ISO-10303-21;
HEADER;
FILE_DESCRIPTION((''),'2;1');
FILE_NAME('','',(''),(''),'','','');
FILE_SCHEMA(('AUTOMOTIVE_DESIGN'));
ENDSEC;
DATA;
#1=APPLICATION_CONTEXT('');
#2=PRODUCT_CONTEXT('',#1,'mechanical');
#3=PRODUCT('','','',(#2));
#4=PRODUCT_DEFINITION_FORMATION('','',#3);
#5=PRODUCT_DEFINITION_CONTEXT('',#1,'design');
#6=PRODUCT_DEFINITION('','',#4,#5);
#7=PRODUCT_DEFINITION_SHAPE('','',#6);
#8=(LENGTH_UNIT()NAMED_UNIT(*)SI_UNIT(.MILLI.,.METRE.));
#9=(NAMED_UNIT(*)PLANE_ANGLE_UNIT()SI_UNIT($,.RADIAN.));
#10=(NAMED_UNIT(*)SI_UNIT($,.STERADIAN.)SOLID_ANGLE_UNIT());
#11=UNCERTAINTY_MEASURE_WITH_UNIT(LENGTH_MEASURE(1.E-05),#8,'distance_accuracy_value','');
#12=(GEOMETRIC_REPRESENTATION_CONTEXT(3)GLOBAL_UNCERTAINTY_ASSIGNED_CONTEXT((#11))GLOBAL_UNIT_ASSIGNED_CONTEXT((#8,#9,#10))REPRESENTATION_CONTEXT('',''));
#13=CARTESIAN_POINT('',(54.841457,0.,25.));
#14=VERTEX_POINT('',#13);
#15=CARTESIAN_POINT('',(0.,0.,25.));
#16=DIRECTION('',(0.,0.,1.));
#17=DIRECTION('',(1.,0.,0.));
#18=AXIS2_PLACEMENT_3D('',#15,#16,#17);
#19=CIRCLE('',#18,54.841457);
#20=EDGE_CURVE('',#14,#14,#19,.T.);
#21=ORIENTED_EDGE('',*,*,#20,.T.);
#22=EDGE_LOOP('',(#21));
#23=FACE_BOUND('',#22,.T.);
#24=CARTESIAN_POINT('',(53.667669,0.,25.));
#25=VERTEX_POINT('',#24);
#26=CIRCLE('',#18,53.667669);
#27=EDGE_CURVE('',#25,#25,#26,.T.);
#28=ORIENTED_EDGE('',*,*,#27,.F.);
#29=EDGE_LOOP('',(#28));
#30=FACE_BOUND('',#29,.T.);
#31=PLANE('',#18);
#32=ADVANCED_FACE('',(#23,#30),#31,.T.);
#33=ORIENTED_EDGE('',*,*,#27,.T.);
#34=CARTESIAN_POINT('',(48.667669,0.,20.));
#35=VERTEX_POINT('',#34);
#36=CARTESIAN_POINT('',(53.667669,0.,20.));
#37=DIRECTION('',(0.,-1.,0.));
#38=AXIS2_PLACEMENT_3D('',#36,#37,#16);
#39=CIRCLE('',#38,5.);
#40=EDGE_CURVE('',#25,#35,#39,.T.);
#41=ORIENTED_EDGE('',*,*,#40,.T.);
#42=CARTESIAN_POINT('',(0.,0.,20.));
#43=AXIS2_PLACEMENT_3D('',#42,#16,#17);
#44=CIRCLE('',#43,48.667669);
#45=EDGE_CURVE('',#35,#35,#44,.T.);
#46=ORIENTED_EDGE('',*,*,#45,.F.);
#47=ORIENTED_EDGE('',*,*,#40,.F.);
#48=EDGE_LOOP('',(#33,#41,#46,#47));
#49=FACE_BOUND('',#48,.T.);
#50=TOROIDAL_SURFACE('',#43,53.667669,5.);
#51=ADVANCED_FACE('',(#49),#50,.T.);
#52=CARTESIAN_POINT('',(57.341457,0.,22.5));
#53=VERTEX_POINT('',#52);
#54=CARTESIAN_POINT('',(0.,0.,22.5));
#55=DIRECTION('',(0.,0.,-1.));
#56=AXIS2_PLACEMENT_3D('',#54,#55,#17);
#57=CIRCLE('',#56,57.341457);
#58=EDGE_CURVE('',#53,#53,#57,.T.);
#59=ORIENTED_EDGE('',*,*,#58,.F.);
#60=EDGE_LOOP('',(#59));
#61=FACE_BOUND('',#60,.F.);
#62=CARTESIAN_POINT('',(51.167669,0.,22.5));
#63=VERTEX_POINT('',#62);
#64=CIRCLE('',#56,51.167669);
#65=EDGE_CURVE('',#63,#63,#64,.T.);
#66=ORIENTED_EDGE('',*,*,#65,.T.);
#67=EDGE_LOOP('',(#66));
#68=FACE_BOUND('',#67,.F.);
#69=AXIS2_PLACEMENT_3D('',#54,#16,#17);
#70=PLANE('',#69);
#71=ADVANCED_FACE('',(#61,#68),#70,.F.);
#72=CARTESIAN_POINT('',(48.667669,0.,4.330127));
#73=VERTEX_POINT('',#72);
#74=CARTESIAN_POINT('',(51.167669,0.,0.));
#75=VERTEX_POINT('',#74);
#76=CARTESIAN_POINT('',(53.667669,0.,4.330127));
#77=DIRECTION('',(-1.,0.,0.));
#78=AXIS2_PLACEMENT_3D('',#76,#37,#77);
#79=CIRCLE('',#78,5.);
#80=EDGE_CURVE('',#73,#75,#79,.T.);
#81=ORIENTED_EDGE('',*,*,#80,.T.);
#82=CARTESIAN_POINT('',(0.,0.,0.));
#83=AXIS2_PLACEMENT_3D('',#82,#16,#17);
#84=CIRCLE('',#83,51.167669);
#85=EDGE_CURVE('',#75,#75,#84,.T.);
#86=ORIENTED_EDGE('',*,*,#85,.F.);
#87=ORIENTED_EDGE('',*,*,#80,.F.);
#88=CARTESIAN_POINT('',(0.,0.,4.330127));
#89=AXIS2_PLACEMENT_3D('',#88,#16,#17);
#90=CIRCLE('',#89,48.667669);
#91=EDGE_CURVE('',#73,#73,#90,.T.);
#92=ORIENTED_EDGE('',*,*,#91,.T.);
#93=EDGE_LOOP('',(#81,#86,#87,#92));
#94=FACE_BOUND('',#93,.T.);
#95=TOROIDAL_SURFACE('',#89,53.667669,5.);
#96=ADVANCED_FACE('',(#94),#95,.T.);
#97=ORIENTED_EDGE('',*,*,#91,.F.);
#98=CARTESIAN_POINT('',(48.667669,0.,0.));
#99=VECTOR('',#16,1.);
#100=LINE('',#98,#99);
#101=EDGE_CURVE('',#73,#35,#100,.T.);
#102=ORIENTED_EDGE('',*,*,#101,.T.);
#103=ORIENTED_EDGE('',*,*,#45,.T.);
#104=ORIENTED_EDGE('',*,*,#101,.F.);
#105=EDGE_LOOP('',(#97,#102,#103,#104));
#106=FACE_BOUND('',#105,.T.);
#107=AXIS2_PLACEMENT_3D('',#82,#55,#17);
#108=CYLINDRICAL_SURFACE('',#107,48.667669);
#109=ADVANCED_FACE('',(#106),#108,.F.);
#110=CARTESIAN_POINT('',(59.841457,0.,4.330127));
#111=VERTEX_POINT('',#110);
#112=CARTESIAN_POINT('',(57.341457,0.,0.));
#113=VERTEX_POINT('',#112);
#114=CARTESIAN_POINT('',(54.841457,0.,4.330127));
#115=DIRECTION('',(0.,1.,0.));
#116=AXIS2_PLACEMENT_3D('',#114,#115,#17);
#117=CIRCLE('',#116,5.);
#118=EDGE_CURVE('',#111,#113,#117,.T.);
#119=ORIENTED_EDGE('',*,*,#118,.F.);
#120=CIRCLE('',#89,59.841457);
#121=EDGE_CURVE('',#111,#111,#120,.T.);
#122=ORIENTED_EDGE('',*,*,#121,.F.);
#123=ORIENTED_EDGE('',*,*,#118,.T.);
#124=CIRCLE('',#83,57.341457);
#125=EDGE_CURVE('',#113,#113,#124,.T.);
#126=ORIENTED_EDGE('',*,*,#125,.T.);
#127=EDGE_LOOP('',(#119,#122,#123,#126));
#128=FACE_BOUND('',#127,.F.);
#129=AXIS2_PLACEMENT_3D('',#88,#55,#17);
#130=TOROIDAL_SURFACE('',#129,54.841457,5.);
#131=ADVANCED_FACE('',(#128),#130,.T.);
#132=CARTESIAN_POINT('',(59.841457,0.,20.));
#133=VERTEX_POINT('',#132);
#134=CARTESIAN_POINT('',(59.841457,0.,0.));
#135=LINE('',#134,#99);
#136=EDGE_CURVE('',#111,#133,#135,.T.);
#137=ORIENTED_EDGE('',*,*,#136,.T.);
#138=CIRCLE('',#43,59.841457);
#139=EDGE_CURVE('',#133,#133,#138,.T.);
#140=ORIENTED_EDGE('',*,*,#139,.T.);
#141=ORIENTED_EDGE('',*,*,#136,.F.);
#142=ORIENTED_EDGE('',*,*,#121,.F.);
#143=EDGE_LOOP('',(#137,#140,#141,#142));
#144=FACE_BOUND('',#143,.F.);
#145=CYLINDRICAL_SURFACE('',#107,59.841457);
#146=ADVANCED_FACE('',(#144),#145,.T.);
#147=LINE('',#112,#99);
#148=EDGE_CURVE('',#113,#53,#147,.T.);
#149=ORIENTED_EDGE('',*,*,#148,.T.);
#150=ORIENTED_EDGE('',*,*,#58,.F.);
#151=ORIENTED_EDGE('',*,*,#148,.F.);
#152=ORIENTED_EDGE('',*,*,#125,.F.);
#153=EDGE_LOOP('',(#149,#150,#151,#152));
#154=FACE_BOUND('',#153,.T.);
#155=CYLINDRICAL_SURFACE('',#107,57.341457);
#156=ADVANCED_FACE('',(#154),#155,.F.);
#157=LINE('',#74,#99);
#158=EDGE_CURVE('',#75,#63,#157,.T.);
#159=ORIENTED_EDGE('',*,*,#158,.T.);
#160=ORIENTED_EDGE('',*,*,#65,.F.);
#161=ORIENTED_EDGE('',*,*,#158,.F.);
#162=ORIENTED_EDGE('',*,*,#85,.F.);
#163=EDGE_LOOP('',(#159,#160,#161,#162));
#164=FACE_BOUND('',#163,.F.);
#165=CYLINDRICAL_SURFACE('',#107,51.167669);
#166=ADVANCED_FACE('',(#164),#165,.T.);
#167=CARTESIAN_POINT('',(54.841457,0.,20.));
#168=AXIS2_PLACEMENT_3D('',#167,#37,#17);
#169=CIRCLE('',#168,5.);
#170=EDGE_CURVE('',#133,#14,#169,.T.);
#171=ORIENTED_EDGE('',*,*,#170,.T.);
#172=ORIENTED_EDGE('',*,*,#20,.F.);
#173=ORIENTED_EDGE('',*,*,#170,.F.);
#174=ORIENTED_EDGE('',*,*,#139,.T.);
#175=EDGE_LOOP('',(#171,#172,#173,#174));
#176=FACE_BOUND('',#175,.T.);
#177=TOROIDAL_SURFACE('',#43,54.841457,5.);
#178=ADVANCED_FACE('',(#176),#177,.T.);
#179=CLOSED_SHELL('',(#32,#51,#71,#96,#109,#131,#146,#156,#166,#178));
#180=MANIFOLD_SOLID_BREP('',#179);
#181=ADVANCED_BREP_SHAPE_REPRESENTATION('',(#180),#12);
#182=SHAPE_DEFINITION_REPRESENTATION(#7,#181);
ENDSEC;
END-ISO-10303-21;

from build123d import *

# Parameters (mm, degrees)
F0_R     = 59.8414566133
F0_R_2   = 48.6676693488
F3_DEPTH = 25
F7_T     = -2.5


# Not quite as in the source:
# - a fillet or chamfer that OpenCascade refuses, or shapes differently, is made with other operations: its cross-section is extruded or revolved along the edge and cut away or added
# - the program builds the solid bodies; features that only make, move or delete a surface that nothing else refers to are left out


with BuildPart() as f3:
    # F0 (on Top) → F3 (new body)
    with BuildSketch(Plane.XY):
        Circle(F0_R)
        Circle(F0_R_2, mode=Mode.SUBTRACT)
    extrude(amount=F3_DEPTH)

    # F7
    f7_openings = [f3.faces().sort_by_distance(p)[0] for p in [
        (-58.148885, 0, 0),
    ]]
    offset(amount=F7_T, openings=f7_openings)

    # F8: fillet of radius 5 on 3 edges, made by hand

    # F8_s1 → F8_t2 (revolve, cut)
    with BuildSketch(Plane.XZ):
        with BuildLine():
            ThreePointArc((59.8414566133, 4.3301270189), (59.1715836322, 1.8301270189), (57.3414566133, 0))
            Line((57.3414566133, 0), (59.8414566133, 0))
            Line((59.8414566133, 0), (59.8414566133, 4.3301270189))
        make_face()
    revolve(axis=Axis((0, 0, 0), (0, 0, 1)), mode=Mode.SUBTRACT)

    # F8_s3 → F8_t4 (revolve, cut)
    with BuildSketch(Plane.XZ):
        with BuildLine():
            ThreePointArc((59.8414566133, 20), (58.3769905192, 23.5355339059), (54.8414566133, 25))
            Line((54.8414566133, 25), (59.8414566133, 25))
            Line((59.8414566133, 25), (59.8414566133, 20))
        make_face()
    revolve(axis=Axis((0, 0, 25), (0, 0, 1)), mode=Mode.SUBTRACT)

    # F9: fillet of radius 5 on 3 edges, made by hand

    # F9_s1 → F9_t2 (revolve, cut)
    with BuildSketch(Plane.XZ):
        with BuildLine():
            ThreePointArc((48.6676693488, 4.3301270189), (49.3375423299, 1.8301270189), (51.1676693488, 0))
            Line((51.1676693488, 0), (48.6676693488, 0))
            Line((48.6676693488, 0), (48.6676693488, 4.3301270189))
        make_face()
    revolve(axis=Axis((0, 0, 0), (0, 0, 1)), mode=Mode.SUBTRACT)

    # F9_s3 → F9_t4 (revolve, cut)
    with BuildSketch(Plane.XZ):
        with BuildLine():
            ThreePointArc((53.6676693488, 25), (50.1321354429, 23.5355339059), (48.6676693488, 20))
            Line((48.6676693488, 20), (48.6676693488, 25))
            Line((48.6676693488, 25), (53.6676693488, 25))
        make_face()
    revolve(axis=Axis((0, 0, 25), (0, 0, 1)), mode=Mode.SUBTRACT)


solid = f3.part
